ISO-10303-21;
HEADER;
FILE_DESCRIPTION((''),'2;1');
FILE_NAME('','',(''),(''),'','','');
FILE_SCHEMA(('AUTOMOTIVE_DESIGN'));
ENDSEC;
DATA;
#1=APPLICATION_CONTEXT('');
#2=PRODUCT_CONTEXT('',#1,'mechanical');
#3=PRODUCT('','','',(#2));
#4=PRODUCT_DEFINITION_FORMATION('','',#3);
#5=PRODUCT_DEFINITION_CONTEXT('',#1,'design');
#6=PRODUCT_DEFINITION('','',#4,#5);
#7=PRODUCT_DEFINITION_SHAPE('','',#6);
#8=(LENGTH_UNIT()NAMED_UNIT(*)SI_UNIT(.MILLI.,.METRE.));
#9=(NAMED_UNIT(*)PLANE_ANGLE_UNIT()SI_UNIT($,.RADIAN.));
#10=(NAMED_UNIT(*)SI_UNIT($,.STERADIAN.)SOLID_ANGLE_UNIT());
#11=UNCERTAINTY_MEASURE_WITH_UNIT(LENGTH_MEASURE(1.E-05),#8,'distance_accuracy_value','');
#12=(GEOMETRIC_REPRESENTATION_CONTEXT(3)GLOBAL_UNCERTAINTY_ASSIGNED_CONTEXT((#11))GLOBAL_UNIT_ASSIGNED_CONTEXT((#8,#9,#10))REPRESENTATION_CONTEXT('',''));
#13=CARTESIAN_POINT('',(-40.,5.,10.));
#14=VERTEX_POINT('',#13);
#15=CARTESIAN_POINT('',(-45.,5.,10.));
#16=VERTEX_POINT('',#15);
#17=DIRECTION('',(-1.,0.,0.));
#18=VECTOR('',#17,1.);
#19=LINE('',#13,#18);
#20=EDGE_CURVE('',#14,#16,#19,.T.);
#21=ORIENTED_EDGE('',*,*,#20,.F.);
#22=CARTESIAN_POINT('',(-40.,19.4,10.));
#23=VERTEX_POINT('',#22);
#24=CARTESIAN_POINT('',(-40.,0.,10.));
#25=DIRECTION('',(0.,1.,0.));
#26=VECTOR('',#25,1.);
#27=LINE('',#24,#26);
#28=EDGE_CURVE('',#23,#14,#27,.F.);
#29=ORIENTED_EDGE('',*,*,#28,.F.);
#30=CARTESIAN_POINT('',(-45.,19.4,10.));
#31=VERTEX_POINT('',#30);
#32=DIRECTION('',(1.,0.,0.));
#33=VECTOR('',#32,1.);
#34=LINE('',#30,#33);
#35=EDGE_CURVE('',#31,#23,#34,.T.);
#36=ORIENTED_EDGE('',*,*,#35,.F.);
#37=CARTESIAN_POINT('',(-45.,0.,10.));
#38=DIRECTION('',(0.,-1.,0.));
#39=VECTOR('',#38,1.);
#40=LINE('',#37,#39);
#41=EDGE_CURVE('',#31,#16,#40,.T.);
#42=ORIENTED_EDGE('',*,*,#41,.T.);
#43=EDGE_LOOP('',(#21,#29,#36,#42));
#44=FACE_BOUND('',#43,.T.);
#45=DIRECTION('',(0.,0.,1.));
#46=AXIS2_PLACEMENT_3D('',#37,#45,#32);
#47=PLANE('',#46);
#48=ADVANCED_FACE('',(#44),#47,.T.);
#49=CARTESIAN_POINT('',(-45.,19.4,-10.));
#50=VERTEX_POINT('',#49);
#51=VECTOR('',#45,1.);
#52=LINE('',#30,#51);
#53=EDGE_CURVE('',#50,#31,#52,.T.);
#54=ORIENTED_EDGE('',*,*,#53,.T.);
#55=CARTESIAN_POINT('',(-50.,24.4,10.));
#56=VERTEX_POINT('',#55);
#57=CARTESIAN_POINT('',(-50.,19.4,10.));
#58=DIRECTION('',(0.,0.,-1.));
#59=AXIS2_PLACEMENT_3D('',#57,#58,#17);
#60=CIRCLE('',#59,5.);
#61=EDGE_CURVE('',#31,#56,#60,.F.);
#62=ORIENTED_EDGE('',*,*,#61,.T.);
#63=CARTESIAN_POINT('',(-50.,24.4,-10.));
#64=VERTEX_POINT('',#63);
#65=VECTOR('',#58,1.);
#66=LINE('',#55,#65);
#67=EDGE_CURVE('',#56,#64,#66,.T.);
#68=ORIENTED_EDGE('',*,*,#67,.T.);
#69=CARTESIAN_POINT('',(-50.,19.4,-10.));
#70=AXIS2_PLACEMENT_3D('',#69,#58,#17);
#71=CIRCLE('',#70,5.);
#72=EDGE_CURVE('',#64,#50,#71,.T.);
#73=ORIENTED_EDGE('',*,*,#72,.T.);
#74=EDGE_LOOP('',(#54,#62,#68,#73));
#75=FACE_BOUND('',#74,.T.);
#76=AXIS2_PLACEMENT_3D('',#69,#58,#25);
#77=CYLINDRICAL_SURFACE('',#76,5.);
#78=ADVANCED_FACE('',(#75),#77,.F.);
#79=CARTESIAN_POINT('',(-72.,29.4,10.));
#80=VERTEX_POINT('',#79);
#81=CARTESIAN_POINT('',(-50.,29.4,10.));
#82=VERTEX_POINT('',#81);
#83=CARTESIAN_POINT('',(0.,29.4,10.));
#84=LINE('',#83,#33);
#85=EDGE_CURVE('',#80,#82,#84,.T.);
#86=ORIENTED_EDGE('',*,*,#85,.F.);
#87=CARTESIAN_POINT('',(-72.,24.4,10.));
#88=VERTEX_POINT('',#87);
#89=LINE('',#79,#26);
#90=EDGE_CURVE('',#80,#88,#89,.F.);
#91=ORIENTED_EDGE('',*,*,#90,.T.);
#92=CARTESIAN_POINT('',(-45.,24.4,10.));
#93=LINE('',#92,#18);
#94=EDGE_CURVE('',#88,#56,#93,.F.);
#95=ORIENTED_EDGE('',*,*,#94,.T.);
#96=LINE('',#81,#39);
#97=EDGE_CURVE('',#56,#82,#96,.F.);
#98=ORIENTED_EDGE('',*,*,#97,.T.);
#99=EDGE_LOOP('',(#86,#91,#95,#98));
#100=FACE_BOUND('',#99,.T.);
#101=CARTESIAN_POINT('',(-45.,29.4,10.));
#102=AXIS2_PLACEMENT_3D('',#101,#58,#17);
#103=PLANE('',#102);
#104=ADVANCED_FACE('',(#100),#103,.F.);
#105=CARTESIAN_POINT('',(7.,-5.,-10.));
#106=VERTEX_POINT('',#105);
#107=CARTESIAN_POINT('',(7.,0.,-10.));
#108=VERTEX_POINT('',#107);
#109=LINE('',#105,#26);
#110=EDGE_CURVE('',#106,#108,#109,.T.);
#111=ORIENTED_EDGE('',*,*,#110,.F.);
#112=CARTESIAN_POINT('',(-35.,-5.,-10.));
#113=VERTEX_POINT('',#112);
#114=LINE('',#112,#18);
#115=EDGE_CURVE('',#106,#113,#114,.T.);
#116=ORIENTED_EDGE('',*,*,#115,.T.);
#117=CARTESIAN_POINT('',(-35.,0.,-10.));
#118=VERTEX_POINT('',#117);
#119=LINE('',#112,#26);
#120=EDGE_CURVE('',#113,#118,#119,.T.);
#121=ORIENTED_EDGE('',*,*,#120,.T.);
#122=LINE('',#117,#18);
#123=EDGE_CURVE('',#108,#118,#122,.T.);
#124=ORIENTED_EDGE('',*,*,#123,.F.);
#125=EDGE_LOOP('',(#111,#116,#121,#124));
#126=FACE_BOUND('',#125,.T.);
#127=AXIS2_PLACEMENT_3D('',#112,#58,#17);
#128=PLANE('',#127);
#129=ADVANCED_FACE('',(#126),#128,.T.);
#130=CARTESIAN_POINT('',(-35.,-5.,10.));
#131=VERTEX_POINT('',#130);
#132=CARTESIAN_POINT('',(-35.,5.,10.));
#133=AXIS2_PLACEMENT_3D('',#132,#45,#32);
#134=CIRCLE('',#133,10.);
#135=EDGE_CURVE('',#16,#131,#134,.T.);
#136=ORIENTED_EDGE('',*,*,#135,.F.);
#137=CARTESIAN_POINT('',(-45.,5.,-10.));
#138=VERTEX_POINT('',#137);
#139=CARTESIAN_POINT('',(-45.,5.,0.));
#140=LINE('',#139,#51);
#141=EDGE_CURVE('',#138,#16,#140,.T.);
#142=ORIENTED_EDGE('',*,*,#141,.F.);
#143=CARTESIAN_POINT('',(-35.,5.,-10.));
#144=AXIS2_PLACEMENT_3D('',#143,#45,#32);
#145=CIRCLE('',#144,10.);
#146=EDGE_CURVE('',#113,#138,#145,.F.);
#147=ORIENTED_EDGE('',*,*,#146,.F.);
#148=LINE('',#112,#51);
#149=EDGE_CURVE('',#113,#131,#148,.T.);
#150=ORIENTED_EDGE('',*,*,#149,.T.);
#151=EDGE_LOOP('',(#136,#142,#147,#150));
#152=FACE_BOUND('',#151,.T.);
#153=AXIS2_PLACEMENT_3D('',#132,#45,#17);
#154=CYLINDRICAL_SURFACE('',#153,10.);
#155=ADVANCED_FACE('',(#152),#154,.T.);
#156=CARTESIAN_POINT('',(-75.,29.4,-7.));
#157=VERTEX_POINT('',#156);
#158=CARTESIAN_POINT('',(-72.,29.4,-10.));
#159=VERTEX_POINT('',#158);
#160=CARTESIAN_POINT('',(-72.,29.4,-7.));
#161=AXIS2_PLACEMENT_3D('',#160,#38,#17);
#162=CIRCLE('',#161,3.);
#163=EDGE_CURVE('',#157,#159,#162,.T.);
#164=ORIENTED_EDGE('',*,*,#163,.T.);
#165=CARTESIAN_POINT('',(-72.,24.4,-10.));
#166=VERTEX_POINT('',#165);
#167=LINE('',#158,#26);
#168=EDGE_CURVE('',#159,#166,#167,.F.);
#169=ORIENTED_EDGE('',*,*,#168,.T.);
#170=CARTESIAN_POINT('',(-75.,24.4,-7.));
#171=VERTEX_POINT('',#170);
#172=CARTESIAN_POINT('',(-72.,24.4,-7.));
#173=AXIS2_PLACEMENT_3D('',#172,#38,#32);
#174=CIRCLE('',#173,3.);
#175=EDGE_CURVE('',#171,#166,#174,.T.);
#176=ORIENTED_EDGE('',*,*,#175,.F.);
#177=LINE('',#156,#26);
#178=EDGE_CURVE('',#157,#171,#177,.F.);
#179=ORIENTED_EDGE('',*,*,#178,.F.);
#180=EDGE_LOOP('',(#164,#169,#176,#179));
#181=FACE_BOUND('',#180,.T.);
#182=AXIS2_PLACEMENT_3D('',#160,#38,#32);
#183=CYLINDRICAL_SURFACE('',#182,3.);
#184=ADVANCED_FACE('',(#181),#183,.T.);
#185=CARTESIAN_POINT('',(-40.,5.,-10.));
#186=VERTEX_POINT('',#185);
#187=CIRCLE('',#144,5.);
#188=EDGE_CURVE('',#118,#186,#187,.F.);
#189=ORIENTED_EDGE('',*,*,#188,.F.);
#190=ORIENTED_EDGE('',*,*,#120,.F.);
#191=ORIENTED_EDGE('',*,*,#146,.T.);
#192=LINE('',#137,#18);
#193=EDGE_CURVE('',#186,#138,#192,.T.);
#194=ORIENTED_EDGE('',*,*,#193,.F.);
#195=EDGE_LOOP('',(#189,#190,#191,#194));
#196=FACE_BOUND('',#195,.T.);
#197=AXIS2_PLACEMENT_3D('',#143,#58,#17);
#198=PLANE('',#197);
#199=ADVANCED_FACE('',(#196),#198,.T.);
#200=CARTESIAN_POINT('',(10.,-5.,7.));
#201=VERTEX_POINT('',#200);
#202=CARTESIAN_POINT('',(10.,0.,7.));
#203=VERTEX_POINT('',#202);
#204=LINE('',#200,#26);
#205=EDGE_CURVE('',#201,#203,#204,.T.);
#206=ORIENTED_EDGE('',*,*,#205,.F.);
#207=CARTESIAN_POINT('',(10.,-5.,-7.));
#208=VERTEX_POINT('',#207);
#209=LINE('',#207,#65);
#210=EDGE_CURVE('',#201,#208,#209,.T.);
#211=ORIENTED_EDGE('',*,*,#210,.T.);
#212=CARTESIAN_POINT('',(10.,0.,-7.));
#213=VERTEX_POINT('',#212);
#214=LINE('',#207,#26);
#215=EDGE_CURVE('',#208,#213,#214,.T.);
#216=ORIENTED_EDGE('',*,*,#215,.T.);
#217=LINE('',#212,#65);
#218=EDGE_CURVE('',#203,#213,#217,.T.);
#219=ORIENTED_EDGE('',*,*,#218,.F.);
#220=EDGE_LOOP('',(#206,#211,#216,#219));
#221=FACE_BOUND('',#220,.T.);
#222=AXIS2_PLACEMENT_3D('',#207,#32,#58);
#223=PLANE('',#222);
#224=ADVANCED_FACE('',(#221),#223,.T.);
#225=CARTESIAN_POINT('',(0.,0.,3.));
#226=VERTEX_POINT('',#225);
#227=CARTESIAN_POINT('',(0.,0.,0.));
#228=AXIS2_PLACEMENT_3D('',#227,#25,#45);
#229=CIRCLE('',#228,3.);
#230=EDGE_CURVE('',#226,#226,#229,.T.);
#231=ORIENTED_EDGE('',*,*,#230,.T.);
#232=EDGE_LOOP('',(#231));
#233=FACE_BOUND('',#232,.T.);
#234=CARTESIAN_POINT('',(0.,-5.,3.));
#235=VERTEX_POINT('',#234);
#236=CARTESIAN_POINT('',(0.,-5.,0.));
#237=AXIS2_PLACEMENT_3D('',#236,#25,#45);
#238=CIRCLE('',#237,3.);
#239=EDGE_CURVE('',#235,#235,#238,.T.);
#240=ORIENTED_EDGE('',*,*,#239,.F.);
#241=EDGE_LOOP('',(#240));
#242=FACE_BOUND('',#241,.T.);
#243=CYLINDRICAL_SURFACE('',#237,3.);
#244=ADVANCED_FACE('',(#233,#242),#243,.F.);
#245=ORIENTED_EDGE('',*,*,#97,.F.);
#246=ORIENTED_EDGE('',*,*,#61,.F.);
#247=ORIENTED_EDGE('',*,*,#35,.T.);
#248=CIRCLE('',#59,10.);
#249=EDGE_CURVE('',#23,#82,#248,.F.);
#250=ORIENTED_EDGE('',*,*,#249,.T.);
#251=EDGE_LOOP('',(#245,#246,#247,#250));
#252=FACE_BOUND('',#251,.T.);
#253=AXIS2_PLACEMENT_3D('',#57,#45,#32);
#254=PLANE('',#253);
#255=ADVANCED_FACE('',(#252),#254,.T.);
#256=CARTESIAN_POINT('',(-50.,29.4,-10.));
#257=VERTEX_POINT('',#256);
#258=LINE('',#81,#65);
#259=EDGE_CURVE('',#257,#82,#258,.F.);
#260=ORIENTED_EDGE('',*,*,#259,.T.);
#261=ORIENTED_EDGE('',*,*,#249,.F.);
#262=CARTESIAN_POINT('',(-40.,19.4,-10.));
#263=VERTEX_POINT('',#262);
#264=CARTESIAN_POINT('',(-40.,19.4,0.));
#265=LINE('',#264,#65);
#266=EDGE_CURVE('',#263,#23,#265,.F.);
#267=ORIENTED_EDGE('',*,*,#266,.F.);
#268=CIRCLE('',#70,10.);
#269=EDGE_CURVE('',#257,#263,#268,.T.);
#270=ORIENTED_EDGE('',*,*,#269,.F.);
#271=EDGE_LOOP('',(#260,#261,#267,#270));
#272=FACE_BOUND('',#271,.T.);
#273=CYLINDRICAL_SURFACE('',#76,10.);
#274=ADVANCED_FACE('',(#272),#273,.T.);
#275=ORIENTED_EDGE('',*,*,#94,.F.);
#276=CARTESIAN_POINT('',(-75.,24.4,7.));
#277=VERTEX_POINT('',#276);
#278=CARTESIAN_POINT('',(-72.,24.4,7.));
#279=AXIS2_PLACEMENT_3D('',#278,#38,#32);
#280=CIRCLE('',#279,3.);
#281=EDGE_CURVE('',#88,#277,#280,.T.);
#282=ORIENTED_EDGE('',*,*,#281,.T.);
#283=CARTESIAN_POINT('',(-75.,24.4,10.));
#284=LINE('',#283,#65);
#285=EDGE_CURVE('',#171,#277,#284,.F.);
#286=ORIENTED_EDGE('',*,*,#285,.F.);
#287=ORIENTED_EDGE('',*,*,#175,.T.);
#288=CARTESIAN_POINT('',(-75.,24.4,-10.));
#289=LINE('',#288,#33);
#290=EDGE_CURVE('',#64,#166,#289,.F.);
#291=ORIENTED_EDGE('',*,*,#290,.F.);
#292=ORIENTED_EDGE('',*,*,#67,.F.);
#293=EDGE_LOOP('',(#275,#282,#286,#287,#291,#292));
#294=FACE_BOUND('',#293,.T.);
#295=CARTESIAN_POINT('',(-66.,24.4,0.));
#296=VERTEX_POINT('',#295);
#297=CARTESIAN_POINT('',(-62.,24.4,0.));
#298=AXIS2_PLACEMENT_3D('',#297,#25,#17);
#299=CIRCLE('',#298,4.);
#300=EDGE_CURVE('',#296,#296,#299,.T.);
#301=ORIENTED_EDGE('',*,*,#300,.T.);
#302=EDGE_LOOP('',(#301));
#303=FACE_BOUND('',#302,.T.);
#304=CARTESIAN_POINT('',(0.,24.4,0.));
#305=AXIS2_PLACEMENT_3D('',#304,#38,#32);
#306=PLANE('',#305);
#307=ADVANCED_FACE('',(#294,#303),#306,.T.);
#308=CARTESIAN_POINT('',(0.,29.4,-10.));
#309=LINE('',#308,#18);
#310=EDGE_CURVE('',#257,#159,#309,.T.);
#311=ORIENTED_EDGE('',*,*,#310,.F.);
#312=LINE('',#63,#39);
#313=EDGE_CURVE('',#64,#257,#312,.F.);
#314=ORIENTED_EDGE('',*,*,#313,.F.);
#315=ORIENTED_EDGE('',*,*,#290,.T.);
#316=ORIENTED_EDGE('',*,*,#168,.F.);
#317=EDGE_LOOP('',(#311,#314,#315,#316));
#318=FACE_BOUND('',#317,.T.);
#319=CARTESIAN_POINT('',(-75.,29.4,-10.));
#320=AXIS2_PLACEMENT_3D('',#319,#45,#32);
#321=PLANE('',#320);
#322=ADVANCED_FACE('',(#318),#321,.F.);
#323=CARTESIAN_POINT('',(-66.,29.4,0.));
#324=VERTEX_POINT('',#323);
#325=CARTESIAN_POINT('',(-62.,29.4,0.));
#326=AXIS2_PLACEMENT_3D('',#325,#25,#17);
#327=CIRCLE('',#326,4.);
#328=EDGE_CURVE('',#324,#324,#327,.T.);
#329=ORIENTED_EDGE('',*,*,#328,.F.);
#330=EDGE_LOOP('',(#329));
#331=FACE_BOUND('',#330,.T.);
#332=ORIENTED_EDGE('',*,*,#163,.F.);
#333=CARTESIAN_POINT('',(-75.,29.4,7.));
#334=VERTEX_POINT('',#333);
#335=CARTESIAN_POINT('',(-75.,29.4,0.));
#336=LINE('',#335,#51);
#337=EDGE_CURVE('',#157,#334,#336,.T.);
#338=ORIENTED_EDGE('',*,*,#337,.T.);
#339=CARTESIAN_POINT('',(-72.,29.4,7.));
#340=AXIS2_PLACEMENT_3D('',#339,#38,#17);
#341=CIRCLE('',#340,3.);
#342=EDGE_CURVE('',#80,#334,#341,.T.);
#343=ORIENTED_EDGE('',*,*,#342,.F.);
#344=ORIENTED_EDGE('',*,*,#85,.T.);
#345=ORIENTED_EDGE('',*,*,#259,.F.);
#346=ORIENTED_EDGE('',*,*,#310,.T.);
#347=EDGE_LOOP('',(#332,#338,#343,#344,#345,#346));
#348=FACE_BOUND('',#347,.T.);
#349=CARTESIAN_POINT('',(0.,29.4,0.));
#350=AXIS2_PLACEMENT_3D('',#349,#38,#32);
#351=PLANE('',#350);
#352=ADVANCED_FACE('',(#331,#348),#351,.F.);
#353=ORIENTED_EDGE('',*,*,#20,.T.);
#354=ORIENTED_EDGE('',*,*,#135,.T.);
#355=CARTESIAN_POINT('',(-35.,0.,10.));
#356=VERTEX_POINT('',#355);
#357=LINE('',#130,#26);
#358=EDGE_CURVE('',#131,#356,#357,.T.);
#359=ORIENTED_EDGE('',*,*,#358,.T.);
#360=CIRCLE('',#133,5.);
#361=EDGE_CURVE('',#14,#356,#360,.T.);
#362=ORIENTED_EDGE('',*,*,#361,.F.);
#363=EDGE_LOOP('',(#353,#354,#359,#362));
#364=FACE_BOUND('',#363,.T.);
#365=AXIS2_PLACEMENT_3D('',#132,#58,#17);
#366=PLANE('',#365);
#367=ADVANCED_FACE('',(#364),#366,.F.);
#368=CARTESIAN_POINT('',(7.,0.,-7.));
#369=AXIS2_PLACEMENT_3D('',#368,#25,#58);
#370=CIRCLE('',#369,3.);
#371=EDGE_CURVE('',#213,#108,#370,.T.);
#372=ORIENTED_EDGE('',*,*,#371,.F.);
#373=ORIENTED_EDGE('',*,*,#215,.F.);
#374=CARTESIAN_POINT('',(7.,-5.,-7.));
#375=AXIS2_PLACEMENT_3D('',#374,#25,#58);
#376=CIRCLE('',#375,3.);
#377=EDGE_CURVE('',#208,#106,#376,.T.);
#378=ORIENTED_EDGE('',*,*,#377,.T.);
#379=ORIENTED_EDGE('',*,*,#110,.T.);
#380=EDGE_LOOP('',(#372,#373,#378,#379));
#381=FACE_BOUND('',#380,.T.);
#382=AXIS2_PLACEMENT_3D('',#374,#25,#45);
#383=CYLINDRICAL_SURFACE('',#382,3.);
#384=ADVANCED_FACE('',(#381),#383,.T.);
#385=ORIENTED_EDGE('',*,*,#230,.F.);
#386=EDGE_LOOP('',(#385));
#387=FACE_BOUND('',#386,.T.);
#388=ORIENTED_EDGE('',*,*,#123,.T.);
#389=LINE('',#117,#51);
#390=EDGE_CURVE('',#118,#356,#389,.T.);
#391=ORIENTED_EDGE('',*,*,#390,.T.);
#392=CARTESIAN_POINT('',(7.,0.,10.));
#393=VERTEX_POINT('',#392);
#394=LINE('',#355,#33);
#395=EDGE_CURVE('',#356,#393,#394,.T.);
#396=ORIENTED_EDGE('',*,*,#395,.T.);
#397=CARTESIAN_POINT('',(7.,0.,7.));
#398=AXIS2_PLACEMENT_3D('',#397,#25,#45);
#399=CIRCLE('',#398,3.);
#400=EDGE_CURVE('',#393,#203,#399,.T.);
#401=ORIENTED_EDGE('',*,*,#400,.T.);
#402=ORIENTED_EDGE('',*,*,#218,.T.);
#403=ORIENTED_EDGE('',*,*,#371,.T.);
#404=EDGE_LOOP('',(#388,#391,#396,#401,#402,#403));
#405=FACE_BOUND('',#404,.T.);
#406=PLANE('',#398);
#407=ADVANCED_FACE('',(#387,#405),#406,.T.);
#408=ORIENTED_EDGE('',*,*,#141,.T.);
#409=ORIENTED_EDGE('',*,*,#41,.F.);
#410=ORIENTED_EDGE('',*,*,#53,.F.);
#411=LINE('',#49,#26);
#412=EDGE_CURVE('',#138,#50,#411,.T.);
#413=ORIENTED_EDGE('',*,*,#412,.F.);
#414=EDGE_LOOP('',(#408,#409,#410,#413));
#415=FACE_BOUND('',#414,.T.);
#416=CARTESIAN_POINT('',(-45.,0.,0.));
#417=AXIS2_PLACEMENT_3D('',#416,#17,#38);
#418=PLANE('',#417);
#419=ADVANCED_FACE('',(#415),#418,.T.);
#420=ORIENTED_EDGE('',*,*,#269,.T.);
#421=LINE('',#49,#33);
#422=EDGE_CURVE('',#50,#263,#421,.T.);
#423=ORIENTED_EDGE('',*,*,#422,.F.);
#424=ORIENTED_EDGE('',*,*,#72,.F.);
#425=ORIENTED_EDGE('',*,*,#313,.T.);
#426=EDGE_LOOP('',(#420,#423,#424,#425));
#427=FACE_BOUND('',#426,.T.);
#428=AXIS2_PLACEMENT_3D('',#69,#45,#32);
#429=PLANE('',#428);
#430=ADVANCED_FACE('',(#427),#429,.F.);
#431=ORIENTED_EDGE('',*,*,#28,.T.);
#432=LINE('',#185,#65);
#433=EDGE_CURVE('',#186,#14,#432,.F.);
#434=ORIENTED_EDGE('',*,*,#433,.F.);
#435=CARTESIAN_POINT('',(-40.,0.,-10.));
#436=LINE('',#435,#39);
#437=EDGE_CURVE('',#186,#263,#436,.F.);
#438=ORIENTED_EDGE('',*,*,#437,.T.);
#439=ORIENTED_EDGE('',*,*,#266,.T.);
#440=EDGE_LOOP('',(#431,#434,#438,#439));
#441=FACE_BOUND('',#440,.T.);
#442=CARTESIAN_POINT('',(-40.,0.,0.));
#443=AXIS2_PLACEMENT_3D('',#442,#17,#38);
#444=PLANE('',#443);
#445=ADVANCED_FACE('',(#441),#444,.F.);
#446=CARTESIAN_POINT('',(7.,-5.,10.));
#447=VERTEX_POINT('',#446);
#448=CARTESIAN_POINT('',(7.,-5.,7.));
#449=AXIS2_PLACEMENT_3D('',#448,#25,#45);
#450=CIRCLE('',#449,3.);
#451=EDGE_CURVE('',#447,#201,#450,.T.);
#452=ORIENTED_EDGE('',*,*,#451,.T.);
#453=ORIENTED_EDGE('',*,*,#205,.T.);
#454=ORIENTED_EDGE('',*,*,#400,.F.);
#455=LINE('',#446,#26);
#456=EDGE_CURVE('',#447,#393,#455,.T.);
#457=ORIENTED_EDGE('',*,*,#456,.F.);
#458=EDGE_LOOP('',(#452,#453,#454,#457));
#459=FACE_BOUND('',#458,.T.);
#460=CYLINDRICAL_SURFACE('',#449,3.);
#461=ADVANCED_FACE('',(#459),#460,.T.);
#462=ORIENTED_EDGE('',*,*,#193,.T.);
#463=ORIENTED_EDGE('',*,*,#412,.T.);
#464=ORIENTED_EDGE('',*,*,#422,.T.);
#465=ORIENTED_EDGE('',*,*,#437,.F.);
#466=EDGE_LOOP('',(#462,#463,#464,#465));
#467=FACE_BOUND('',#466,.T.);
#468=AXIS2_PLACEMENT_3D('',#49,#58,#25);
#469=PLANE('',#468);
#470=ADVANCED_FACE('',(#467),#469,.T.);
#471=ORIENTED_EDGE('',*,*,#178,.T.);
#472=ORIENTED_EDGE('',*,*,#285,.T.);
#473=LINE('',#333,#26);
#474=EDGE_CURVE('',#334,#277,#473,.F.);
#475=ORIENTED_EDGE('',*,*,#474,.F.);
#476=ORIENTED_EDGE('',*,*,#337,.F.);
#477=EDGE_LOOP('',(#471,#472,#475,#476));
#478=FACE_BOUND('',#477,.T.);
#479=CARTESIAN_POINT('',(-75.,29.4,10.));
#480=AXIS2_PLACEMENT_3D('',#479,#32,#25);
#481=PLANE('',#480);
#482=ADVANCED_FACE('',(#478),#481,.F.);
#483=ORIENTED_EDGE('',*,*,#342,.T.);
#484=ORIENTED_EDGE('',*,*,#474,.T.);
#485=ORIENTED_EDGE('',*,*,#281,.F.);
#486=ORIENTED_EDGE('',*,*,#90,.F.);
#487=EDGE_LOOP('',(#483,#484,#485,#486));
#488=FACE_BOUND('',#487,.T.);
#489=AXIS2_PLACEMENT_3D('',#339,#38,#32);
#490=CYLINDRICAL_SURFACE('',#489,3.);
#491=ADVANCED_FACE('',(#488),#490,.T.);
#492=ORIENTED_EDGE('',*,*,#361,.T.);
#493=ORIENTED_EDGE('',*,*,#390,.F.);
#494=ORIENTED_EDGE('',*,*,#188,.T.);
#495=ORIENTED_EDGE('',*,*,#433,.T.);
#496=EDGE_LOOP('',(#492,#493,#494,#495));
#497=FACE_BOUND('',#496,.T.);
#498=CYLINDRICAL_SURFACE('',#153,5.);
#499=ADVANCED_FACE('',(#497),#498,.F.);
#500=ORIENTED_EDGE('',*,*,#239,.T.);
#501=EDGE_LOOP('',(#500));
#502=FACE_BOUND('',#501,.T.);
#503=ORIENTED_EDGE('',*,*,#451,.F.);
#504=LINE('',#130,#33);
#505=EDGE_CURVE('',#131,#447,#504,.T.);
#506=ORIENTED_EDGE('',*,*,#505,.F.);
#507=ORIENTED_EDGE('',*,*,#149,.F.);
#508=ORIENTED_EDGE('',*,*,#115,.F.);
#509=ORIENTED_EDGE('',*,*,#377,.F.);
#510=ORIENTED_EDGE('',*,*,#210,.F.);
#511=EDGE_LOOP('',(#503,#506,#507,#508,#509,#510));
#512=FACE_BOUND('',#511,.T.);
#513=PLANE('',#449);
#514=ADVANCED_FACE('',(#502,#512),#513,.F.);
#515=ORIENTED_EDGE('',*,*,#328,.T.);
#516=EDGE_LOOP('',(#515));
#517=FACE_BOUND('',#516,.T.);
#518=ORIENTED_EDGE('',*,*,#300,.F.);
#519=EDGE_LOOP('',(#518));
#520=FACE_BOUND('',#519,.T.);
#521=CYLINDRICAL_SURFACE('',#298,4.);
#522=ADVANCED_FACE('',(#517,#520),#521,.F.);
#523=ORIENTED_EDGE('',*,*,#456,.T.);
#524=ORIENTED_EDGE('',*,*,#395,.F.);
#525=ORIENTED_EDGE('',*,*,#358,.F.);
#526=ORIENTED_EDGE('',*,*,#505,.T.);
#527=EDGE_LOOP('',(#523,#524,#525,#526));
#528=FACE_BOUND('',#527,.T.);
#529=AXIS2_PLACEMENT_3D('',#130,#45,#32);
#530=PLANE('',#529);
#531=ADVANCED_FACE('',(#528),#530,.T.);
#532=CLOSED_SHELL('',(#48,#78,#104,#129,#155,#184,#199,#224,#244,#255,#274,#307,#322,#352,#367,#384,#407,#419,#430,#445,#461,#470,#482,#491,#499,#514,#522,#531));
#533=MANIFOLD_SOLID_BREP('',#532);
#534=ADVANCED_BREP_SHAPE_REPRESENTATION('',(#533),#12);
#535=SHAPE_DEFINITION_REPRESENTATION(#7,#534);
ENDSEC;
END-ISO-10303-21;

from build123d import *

# Parameters (mm, degrees)
SKETCH1_R          = 3
BASE_FLANGE1_DEPTH = 5
EDGE_FLANGE1_DEPTH = 20
EDGE_FLANGE2_DEPTH = 20
SKETCH15_R         = 4
CUT_EXTRUDE1_DEPTH = 5
CUT_EXTRUDE2_DEPTH = 5


# Sheet-metal steps are written as plain solids
with BuildPart() as part:
    # Sketch1 → Base-Flange1 (new body)
    with BuildSketch(Plane(origin=(0, 0, 0), x_dir=(1, 0, 0), z_dir=(0, 1, 0))):
        with BuildLine():
            Line((-35, 10), (7, 10))
            ThreePointArc((7, 10), (9.121320344, 9.121320344), (10, 7))
            Line((10, 7), (10, -7))
            ThreePointArc((10, -7), (9.121320344, -9.121320344), (7, -10))
            Line((7, -10), (-35, -10))
            Line((-35, -10), (-35, 10))
        make_face()
        with Locations(Location((0, 0, 0), (0, 0, 270))):
            Circle(SKETCH1_R, mode=Mode.SUBTRACT)
    extrude(amount=-BASE_FLANGE1_DEPTH)

    # Edge-Flange1 section (across the edge) → Edge-Flange1 (add)
    with BuildSketch(Plane(origin=(-40, 0, -10), x_dir=(1, 0, 0), z_dir=(0, 0, 1))):
        with BuildLine():
            Line((-5, 5), (-5, 19.4))
            Line((-5, 19.4), (0, 19.4))
            Line((0, 19.4), (0, 5))
            ThreePointArc((0, 5), (1.464466094, 1.464466094), (5, 0))
            Line((5, 0), (5, -5))
            ThreePointArc((5, -5), (-2.071067812, -2.071067812), (-5, 5))
        make_face()
    extrude(amount=EDGE_FLANGE1_DEPTH)

    # Edge-Flange2 section (across the edge) → Edge-Flange2 (add)
    with BuildSketch(Plane(origin=(-45, 24.4, 10), x_dir=(0, -1, 0), z_dir=(0, 0, -1))):
        with BuildLine():
            Line((-5, 5), (-5, 30))
            Line((-5, 30), (0, 30))
            Line((0, 30), (0, 5))
            ThreePointArc((0, 5), (1.464466094, 1.464466094), (5, 0))
            Line((5, 0), (5, -5))
            ThreePointArc((5, -5), (-2.071067812, -2.071067812), (-5, 5))
        make_face()
    extrude(amount=EDGE_FLANGE2_DEPTH)

    # Sketch15 → Cut-Extrude1 (cut)
    with BuildSketch(Plane(origin=(0, 29.4, 0), x_dir=(1, 0, 0), z_dir=(0, 1, 0))):
        with Locations(Location((-62, 0, 0), (0, 0, 180))):
            Circle(SKETCH15_R)
    extrude(amount=-CUT_EXTRUDE1_DEPTH, mode=Mode.SUBTRACT)

    # Sketch16 → Cut-Extrude2 (cut)
    with BuildSketch(Plane(origin=(0, 29.4, 0), x_dir=(1, 0, 0), z_dir=(0, 1, 0))):
        with BuildLine():
            Line((-75, 7), (-75, 10))
            Line((-75, 10), (-72, 10))
            ThreePointArc((-72, 10), (-74.121320344, 9.121320344), (-75, 7))
        make_face()
        with BuildLine():
            Line((-75, -7), (-75, -10))
            Line((-75, -10), (-72, -10))
            ThreePointArc((-72, -10), (-74.121320344, -9.121320344), (-75, -7))
        make_face()
    extrude(amount=-CUT_EXTRUDE2_DEPTH, mode=Mode.SUBTRACT)


solid = part.part
